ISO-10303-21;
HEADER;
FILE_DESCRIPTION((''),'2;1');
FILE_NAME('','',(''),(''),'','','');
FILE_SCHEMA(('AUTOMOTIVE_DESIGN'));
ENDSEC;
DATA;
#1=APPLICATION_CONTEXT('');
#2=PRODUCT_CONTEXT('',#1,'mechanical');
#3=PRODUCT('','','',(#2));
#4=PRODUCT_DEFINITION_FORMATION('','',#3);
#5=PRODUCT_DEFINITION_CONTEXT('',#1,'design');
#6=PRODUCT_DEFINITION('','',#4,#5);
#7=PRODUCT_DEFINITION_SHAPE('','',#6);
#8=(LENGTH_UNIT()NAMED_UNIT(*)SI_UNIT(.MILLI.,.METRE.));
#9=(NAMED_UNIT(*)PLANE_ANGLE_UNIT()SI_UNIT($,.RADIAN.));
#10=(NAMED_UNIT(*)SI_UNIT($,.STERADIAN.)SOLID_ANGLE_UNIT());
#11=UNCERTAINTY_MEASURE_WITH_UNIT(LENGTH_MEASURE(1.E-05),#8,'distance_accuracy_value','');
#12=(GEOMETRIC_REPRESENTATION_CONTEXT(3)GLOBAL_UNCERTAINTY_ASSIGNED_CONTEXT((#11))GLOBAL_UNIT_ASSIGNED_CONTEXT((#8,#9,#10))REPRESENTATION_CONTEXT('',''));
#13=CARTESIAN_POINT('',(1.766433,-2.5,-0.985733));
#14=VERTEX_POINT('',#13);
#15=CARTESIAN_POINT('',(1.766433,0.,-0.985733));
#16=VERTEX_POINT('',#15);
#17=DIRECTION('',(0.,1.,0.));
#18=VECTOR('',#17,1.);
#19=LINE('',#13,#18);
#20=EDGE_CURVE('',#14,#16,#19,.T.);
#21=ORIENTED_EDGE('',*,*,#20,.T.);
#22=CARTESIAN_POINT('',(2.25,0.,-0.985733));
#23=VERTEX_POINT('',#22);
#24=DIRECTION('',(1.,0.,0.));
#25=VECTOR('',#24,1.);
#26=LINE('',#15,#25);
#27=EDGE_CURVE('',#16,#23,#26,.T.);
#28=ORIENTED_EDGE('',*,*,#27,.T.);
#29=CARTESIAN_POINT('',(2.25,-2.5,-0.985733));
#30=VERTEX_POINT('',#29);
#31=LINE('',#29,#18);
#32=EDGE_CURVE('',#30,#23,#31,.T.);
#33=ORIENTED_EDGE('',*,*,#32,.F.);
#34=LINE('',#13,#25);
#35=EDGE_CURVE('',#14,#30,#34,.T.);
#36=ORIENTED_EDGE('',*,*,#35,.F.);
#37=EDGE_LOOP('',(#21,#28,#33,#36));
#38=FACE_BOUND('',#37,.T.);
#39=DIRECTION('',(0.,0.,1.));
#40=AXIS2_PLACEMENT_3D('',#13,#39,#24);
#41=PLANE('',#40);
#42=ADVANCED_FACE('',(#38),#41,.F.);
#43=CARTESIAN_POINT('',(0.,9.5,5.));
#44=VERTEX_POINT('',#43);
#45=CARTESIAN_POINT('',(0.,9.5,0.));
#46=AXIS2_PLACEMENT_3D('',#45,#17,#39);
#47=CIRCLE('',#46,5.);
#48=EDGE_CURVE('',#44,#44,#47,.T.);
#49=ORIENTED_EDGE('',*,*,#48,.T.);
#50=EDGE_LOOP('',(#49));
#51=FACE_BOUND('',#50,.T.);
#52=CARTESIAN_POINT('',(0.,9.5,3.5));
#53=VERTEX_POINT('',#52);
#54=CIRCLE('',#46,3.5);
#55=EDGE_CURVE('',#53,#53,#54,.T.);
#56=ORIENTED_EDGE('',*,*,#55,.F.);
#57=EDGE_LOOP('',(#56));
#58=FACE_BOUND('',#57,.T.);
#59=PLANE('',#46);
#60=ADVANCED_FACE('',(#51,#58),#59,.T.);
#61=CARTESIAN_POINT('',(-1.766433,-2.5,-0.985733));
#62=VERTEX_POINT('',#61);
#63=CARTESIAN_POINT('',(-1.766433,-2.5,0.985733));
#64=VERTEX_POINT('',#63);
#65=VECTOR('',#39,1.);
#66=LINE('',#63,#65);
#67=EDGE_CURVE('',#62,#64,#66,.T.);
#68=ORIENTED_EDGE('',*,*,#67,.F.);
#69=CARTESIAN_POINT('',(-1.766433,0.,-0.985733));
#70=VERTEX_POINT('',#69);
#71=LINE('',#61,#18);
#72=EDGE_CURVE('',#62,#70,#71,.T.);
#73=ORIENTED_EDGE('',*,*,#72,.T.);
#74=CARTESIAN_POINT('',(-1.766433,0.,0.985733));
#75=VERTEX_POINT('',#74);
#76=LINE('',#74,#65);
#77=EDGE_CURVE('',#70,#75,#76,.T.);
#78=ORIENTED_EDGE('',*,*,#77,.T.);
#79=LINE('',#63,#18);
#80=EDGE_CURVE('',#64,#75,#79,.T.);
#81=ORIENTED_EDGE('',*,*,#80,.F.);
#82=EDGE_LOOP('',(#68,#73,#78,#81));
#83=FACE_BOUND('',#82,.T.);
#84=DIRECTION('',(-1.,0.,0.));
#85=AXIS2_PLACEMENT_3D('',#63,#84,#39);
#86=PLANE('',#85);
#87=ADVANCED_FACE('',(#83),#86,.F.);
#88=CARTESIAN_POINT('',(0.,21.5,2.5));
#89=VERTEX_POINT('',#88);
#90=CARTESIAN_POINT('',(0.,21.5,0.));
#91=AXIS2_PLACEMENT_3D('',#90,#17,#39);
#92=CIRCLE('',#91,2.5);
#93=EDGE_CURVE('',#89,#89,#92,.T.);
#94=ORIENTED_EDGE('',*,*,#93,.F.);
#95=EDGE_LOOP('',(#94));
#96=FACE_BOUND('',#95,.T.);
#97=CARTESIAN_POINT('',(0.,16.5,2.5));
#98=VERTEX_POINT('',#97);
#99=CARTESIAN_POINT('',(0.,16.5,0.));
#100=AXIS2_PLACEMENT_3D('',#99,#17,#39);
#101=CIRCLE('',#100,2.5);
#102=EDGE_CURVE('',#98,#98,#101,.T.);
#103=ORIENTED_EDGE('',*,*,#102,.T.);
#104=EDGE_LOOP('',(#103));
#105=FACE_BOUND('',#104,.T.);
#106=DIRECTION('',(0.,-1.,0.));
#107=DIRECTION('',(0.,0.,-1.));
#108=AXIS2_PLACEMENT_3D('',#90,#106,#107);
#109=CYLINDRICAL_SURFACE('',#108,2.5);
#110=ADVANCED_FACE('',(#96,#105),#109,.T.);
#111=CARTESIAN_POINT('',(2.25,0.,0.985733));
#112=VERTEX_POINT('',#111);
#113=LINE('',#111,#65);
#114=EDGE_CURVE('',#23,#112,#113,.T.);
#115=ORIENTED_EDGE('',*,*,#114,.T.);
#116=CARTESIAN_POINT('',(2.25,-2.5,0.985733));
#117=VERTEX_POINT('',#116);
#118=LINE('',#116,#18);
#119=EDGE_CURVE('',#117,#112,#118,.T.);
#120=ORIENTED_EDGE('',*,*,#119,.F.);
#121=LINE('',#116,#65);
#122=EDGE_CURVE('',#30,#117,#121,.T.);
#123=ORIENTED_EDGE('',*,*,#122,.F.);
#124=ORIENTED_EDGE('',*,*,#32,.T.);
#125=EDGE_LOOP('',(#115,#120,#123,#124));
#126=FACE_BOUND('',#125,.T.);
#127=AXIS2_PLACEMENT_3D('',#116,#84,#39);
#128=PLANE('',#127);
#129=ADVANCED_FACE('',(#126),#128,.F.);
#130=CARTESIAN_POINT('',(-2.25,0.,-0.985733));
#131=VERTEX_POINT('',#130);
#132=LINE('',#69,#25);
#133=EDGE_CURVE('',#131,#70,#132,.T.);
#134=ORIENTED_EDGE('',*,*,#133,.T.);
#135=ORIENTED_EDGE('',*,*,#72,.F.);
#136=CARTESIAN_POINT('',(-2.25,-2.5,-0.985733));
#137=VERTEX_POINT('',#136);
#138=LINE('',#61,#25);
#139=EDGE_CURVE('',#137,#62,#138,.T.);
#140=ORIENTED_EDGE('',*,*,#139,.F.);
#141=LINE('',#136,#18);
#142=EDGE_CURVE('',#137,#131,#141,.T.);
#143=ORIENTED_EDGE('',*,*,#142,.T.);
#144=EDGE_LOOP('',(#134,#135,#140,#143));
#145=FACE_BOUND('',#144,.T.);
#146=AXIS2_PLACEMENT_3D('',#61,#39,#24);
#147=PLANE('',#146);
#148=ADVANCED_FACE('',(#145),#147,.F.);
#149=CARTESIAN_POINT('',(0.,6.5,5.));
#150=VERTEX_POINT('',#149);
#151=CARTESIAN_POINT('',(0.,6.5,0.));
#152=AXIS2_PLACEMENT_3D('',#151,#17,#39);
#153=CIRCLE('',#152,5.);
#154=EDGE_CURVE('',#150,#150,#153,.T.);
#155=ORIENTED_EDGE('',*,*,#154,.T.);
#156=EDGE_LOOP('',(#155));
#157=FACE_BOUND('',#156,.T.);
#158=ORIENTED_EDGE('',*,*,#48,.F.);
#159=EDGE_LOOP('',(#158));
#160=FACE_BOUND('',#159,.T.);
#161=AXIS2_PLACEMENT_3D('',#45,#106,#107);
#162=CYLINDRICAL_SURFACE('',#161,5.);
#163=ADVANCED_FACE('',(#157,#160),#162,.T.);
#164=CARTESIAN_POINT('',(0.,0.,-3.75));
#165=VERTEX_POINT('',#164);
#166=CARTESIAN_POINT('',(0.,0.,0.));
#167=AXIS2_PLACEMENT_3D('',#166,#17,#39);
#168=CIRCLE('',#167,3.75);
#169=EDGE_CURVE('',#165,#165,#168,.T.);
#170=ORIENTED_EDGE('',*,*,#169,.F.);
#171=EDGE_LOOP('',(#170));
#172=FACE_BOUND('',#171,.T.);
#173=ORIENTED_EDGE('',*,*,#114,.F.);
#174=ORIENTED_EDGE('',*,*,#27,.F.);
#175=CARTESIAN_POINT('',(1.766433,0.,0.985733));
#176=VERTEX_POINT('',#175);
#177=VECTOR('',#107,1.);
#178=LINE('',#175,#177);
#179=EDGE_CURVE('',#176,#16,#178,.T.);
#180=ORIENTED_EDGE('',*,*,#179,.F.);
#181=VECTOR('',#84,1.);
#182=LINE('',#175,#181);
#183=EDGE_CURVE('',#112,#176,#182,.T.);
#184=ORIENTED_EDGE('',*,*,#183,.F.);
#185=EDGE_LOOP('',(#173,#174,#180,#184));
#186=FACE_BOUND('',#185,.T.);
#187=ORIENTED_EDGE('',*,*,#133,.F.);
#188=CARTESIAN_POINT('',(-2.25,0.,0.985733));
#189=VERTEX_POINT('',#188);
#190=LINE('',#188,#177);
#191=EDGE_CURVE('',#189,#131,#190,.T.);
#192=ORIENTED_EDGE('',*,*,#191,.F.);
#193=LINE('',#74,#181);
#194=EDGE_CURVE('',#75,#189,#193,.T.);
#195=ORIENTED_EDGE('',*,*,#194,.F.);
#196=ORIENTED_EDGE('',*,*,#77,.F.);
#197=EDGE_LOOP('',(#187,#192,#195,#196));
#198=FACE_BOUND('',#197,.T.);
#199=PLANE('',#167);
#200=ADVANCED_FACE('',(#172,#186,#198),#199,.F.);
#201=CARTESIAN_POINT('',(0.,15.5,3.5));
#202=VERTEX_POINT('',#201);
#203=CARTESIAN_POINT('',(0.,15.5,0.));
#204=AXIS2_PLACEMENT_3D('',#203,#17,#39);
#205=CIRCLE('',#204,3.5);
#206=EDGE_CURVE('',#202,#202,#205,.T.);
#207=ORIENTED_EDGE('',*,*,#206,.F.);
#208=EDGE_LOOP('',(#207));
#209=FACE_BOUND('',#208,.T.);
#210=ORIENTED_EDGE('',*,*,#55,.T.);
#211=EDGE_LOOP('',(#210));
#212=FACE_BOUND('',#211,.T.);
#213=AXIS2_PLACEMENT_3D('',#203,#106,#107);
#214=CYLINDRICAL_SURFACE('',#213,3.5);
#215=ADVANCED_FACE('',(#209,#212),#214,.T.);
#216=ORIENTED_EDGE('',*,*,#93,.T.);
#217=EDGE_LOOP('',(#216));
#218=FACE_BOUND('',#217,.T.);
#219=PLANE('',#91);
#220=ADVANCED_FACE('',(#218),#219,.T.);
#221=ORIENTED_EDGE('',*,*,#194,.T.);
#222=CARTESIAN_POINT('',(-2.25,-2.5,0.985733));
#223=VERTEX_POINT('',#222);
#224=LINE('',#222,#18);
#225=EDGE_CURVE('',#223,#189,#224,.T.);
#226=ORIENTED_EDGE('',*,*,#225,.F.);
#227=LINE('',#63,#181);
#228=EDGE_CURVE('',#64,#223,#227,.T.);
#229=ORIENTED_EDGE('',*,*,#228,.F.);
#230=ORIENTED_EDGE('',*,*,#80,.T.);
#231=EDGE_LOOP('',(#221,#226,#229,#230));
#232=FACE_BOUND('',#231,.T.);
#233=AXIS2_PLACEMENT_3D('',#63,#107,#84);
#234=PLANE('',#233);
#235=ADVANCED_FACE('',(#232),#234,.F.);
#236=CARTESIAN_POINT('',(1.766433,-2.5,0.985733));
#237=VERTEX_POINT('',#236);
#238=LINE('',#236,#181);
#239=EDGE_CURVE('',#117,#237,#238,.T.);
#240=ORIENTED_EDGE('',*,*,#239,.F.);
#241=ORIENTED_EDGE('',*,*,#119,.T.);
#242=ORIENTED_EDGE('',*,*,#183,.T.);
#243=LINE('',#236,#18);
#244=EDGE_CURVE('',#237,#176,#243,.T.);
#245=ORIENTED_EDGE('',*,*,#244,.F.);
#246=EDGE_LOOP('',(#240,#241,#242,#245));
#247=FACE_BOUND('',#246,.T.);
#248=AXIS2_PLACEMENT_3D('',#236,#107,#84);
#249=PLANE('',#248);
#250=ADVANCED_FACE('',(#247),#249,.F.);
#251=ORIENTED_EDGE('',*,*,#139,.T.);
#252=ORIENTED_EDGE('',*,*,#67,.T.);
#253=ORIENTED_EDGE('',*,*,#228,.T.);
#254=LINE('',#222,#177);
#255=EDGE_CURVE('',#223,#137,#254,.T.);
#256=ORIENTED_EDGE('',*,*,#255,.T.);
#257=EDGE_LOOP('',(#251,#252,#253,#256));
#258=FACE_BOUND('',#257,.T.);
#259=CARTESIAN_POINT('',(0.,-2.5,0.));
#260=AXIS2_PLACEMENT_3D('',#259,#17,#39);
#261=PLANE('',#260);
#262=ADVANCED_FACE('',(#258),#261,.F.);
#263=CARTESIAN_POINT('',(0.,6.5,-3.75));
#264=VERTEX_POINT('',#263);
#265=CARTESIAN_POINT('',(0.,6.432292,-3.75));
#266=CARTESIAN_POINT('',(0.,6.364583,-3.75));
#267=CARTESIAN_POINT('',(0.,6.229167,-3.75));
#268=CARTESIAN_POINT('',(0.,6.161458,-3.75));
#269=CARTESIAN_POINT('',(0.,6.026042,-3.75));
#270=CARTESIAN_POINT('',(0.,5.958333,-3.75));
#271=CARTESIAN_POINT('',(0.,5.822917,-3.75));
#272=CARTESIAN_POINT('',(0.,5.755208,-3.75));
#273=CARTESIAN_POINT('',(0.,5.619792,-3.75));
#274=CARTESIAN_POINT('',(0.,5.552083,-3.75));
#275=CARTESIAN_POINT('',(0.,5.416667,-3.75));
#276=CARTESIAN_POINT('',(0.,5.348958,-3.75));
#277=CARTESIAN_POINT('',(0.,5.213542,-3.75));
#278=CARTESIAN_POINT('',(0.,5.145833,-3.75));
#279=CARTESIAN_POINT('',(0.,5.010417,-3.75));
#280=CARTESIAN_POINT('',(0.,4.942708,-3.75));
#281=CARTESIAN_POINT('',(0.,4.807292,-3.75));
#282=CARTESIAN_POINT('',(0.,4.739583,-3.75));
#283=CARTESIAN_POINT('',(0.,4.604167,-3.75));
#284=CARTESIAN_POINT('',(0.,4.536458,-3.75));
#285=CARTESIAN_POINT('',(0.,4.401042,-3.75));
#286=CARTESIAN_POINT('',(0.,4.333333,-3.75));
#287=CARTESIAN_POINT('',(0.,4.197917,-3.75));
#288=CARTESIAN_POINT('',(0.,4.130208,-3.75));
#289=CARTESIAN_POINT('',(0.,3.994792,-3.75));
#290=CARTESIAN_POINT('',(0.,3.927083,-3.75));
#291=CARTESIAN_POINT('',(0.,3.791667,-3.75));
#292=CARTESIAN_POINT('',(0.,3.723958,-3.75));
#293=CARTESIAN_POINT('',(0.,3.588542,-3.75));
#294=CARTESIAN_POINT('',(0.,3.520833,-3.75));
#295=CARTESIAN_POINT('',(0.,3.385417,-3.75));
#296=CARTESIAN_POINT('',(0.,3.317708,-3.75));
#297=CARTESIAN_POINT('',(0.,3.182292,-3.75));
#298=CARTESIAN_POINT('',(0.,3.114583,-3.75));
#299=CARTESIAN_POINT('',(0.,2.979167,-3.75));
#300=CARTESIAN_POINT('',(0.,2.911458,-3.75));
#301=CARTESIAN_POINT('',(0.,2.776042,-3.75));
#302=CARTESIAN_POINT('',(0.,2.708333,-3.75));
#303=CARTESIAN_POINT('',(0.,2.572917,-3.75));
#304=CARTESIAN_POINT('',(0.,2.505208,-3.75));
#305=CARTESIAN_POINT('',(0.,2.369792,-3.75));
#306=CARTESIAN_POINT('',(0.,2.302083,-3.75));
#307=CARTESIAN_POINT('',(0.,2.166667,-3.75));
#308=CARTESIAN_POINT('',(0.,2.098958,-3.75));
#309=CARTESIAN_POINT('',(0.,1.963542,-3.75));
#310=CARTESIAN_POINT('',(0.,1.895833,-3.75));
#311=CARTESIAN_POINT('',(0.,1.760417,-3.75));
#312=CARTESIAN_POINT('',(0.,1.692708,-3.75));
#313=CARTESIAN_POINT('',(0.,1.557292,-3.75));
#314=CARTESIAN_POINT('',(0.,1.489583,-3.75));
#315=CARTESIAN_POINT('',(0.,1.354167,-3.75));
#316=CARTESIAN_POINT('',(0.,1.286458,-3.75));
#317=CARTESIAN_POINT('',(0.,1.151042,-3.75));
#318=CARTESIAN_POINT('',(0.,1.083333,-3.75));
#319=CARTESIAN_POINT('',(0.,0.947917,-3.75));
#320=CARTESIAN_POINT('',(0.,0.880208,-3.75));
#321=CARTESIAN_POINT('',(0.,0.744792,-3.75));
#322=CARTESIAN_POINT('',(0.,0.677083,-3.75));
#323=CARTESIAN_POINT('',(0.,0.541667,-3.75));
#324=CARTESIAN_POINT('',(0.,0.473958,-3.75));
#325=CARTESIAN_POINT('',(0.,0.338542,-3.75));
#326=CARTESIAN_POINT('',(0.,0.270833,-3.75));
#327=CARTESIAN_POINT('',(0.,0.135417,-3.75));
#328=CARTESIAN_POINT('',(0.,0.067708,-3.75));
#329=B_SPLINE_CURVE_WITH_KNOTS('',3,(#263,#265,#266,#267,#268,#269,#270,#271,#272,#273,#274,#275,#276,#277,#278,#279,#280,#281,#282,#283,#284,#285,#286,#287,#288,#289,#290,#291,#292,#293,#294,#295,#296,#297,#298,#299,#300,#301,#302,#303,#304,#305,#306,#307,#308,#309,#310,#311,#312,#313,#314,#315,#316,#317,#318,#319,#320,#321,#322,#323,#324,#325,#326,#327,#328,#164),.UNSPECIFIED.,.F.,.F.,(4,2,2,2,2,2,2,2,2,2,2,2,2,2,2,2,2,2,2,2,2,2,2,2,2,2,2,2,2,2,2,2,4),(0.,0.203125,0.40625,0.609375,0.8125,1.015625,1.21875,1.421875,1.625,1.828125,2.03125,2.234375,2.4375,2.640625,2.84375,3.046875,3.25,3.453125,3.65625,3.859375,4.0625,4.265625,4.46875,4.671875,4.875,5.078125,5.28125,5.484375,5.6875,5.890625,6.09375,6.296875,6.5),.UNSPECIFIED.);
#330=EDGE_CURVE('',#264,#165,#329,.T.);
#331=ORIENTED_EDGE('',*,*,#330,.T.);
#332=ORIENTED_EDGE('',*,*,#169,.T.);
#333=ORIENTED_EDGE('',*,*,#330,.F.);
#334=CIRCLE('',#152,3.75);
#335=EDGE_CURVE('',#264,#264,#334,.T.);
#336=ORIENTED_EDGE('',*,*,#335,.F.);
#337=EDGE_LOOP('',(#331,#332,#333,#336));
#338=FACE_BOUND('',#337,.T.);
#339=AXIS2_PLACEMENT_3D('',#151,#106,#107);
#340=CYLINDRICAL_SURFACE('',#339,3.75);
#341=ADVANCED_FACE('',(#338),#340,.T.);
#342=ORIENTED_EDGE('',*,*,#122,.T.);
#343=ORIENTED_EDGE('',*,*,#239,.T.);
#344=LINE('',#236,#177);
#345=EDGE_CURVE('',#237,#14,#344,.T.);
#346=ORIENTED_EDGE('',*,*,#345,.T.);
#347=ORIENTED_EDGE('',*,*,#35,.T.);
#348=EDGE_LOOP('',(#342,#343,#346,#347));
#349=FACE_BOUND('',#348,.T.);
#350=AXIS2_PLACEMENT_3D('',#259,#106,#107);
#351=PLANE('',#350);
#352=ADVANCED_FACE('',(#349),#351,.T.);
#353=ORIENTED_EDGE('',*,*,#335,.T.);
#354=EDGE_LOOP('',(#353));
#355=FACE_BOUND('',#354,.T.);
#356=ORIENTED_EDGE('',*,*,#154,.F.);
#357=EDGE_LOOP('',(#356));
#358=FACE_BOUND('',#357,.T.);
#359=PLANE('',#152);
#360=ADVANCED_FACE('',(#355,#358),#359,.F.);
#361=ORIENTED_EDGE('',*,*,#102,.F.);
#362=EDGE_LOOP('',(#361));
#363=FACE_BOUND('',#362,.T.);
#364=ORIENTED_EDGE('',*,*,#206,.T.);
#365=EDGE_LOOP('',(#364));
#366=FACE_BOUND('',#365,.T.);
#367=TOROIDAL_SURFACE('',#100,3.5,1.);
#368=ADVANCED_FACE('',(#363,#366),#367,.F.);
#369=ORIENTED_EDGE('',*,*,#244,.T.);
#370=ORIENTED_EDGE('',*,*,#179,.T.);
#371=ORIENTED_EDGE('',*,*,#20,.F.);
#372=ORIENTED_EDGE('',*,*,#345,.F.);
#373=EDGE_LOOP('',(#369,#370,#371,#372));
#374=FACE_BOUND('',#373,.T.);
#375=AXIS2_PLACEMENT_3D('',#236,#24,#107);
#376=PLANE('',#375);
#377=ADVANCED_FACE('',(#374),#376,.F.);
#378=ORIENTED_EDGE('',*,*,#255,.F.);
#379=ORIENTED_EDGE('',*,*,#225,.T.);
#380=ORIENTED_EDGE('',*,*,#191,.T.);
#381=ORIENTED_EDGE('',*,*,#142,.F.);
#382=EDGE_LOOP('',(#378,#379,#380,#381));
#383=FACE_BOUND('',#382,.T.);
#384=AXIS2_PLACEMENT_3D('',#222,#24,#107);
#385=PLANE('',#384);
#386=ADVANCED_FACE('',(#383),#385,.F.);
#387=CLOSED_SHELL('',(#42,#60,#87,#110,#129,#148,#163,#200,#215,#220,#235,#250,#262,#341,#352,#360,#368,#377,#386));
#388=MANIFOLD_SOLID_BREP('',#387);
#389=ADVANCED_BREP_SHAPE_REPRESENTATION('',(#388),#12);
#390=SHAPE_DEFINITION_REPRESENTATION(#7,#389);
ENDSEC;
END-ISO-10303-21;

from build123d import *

# Parameters (mm, degrees)
SKETCH_1_R      = 3.75
EXTRUDE_1_DEPTH = 6.5
SKETCH_2_R      = 5
EXTRUDE_2_DEPTH = 3
SKETCH_3_R      = 3.5
EXTRUDE_3_DEPTH = 6
SKETCH_4_R      = 2.5
EXTRUDE_4_DEPTH = 6
FILLET_1_R      = 1
SKETCH_5_W      = 0.48356718
SKETCH_5_H      = 1.971466194
EXTRUDE_5_DEPTH = 2.5


with BuildPart() as part:
    # Эскиз1 → Бобышка-Вытянуть1 (new body)
    with BuildSketch(Plane(origin=(0, 0, 0), x_dir=(1, 0, 0), z_dir=(0, 1, 0))):
        with Locations(Location((0, 0, 0), (0, 0, 90))):
            Circle(SKETCH_1_R)
    extrude(amount=EXTRUDE_1_DEPTH)

    # Эскиз2 → Бобышка-Вытянуть2 (add)
    with BuildSketch(Plane(origin=(0, 6.5, 0), x_dir=(1, 0, 0), z_dir=(0, 1, 0))):
        with Locations(Location((0, 0, 0), (0, 0, 270))):
            Circle(SKETCH_2_R)
    extrude(amount=EXTRUDE_2_DEPTH)

    # Эскиз3 → Бобышка-Вытянуть3 (add)
    with BuildSketch(Plane(origin=(0, 9.5, 0), x_dir=(1, 0, 0), z_dir=(0, 1, 0))):
        with Locations(Location((0, 0, 0), (0, 0, 270))):
            Circle(SKETCH_3_R)
    extrude(amount=EXTRUDE_3_DEPTH)

    # Эскиз4 → Бобышка-Вытянуть4 (add)
    with BuildSketch(Plane(origin=(0, 15.5, 0), x_dir=(1, 0, 0), z_dir=(0, 1, 0))):
        with Locations(Location((0, 0, 0), (0, 0, 270))):
            Circle(SKETCH_4_R)
    extrude(amount=EXTRUDE_4_DEPTH)

    # Скругление1
    fillet_1_edges = [part.edges().sort_by_distance(p)[0] for p in [
        (0, 15.5, -2.5),
    ]]
    fillet(fillet_1_edges, radius=FILLET_1_R - 0.0001)  # a hair under: the kernel refuses the full size

    # Эскиз5 → Бобышка-Вытянуть5 (add)
    with BuildSketch(Plane.XZ):
        with Locations((2.00821641, 0)):
            Rectangle(SKETCH_5_W, SKETCH_5_H)
        with Locations((-2.00821641, 0)):
            Rectangle(SKETCH_5_W, SKETCH_5_H)
    extrude(amount=EXTRUDE_5_DEPTH)


solid = part.part
